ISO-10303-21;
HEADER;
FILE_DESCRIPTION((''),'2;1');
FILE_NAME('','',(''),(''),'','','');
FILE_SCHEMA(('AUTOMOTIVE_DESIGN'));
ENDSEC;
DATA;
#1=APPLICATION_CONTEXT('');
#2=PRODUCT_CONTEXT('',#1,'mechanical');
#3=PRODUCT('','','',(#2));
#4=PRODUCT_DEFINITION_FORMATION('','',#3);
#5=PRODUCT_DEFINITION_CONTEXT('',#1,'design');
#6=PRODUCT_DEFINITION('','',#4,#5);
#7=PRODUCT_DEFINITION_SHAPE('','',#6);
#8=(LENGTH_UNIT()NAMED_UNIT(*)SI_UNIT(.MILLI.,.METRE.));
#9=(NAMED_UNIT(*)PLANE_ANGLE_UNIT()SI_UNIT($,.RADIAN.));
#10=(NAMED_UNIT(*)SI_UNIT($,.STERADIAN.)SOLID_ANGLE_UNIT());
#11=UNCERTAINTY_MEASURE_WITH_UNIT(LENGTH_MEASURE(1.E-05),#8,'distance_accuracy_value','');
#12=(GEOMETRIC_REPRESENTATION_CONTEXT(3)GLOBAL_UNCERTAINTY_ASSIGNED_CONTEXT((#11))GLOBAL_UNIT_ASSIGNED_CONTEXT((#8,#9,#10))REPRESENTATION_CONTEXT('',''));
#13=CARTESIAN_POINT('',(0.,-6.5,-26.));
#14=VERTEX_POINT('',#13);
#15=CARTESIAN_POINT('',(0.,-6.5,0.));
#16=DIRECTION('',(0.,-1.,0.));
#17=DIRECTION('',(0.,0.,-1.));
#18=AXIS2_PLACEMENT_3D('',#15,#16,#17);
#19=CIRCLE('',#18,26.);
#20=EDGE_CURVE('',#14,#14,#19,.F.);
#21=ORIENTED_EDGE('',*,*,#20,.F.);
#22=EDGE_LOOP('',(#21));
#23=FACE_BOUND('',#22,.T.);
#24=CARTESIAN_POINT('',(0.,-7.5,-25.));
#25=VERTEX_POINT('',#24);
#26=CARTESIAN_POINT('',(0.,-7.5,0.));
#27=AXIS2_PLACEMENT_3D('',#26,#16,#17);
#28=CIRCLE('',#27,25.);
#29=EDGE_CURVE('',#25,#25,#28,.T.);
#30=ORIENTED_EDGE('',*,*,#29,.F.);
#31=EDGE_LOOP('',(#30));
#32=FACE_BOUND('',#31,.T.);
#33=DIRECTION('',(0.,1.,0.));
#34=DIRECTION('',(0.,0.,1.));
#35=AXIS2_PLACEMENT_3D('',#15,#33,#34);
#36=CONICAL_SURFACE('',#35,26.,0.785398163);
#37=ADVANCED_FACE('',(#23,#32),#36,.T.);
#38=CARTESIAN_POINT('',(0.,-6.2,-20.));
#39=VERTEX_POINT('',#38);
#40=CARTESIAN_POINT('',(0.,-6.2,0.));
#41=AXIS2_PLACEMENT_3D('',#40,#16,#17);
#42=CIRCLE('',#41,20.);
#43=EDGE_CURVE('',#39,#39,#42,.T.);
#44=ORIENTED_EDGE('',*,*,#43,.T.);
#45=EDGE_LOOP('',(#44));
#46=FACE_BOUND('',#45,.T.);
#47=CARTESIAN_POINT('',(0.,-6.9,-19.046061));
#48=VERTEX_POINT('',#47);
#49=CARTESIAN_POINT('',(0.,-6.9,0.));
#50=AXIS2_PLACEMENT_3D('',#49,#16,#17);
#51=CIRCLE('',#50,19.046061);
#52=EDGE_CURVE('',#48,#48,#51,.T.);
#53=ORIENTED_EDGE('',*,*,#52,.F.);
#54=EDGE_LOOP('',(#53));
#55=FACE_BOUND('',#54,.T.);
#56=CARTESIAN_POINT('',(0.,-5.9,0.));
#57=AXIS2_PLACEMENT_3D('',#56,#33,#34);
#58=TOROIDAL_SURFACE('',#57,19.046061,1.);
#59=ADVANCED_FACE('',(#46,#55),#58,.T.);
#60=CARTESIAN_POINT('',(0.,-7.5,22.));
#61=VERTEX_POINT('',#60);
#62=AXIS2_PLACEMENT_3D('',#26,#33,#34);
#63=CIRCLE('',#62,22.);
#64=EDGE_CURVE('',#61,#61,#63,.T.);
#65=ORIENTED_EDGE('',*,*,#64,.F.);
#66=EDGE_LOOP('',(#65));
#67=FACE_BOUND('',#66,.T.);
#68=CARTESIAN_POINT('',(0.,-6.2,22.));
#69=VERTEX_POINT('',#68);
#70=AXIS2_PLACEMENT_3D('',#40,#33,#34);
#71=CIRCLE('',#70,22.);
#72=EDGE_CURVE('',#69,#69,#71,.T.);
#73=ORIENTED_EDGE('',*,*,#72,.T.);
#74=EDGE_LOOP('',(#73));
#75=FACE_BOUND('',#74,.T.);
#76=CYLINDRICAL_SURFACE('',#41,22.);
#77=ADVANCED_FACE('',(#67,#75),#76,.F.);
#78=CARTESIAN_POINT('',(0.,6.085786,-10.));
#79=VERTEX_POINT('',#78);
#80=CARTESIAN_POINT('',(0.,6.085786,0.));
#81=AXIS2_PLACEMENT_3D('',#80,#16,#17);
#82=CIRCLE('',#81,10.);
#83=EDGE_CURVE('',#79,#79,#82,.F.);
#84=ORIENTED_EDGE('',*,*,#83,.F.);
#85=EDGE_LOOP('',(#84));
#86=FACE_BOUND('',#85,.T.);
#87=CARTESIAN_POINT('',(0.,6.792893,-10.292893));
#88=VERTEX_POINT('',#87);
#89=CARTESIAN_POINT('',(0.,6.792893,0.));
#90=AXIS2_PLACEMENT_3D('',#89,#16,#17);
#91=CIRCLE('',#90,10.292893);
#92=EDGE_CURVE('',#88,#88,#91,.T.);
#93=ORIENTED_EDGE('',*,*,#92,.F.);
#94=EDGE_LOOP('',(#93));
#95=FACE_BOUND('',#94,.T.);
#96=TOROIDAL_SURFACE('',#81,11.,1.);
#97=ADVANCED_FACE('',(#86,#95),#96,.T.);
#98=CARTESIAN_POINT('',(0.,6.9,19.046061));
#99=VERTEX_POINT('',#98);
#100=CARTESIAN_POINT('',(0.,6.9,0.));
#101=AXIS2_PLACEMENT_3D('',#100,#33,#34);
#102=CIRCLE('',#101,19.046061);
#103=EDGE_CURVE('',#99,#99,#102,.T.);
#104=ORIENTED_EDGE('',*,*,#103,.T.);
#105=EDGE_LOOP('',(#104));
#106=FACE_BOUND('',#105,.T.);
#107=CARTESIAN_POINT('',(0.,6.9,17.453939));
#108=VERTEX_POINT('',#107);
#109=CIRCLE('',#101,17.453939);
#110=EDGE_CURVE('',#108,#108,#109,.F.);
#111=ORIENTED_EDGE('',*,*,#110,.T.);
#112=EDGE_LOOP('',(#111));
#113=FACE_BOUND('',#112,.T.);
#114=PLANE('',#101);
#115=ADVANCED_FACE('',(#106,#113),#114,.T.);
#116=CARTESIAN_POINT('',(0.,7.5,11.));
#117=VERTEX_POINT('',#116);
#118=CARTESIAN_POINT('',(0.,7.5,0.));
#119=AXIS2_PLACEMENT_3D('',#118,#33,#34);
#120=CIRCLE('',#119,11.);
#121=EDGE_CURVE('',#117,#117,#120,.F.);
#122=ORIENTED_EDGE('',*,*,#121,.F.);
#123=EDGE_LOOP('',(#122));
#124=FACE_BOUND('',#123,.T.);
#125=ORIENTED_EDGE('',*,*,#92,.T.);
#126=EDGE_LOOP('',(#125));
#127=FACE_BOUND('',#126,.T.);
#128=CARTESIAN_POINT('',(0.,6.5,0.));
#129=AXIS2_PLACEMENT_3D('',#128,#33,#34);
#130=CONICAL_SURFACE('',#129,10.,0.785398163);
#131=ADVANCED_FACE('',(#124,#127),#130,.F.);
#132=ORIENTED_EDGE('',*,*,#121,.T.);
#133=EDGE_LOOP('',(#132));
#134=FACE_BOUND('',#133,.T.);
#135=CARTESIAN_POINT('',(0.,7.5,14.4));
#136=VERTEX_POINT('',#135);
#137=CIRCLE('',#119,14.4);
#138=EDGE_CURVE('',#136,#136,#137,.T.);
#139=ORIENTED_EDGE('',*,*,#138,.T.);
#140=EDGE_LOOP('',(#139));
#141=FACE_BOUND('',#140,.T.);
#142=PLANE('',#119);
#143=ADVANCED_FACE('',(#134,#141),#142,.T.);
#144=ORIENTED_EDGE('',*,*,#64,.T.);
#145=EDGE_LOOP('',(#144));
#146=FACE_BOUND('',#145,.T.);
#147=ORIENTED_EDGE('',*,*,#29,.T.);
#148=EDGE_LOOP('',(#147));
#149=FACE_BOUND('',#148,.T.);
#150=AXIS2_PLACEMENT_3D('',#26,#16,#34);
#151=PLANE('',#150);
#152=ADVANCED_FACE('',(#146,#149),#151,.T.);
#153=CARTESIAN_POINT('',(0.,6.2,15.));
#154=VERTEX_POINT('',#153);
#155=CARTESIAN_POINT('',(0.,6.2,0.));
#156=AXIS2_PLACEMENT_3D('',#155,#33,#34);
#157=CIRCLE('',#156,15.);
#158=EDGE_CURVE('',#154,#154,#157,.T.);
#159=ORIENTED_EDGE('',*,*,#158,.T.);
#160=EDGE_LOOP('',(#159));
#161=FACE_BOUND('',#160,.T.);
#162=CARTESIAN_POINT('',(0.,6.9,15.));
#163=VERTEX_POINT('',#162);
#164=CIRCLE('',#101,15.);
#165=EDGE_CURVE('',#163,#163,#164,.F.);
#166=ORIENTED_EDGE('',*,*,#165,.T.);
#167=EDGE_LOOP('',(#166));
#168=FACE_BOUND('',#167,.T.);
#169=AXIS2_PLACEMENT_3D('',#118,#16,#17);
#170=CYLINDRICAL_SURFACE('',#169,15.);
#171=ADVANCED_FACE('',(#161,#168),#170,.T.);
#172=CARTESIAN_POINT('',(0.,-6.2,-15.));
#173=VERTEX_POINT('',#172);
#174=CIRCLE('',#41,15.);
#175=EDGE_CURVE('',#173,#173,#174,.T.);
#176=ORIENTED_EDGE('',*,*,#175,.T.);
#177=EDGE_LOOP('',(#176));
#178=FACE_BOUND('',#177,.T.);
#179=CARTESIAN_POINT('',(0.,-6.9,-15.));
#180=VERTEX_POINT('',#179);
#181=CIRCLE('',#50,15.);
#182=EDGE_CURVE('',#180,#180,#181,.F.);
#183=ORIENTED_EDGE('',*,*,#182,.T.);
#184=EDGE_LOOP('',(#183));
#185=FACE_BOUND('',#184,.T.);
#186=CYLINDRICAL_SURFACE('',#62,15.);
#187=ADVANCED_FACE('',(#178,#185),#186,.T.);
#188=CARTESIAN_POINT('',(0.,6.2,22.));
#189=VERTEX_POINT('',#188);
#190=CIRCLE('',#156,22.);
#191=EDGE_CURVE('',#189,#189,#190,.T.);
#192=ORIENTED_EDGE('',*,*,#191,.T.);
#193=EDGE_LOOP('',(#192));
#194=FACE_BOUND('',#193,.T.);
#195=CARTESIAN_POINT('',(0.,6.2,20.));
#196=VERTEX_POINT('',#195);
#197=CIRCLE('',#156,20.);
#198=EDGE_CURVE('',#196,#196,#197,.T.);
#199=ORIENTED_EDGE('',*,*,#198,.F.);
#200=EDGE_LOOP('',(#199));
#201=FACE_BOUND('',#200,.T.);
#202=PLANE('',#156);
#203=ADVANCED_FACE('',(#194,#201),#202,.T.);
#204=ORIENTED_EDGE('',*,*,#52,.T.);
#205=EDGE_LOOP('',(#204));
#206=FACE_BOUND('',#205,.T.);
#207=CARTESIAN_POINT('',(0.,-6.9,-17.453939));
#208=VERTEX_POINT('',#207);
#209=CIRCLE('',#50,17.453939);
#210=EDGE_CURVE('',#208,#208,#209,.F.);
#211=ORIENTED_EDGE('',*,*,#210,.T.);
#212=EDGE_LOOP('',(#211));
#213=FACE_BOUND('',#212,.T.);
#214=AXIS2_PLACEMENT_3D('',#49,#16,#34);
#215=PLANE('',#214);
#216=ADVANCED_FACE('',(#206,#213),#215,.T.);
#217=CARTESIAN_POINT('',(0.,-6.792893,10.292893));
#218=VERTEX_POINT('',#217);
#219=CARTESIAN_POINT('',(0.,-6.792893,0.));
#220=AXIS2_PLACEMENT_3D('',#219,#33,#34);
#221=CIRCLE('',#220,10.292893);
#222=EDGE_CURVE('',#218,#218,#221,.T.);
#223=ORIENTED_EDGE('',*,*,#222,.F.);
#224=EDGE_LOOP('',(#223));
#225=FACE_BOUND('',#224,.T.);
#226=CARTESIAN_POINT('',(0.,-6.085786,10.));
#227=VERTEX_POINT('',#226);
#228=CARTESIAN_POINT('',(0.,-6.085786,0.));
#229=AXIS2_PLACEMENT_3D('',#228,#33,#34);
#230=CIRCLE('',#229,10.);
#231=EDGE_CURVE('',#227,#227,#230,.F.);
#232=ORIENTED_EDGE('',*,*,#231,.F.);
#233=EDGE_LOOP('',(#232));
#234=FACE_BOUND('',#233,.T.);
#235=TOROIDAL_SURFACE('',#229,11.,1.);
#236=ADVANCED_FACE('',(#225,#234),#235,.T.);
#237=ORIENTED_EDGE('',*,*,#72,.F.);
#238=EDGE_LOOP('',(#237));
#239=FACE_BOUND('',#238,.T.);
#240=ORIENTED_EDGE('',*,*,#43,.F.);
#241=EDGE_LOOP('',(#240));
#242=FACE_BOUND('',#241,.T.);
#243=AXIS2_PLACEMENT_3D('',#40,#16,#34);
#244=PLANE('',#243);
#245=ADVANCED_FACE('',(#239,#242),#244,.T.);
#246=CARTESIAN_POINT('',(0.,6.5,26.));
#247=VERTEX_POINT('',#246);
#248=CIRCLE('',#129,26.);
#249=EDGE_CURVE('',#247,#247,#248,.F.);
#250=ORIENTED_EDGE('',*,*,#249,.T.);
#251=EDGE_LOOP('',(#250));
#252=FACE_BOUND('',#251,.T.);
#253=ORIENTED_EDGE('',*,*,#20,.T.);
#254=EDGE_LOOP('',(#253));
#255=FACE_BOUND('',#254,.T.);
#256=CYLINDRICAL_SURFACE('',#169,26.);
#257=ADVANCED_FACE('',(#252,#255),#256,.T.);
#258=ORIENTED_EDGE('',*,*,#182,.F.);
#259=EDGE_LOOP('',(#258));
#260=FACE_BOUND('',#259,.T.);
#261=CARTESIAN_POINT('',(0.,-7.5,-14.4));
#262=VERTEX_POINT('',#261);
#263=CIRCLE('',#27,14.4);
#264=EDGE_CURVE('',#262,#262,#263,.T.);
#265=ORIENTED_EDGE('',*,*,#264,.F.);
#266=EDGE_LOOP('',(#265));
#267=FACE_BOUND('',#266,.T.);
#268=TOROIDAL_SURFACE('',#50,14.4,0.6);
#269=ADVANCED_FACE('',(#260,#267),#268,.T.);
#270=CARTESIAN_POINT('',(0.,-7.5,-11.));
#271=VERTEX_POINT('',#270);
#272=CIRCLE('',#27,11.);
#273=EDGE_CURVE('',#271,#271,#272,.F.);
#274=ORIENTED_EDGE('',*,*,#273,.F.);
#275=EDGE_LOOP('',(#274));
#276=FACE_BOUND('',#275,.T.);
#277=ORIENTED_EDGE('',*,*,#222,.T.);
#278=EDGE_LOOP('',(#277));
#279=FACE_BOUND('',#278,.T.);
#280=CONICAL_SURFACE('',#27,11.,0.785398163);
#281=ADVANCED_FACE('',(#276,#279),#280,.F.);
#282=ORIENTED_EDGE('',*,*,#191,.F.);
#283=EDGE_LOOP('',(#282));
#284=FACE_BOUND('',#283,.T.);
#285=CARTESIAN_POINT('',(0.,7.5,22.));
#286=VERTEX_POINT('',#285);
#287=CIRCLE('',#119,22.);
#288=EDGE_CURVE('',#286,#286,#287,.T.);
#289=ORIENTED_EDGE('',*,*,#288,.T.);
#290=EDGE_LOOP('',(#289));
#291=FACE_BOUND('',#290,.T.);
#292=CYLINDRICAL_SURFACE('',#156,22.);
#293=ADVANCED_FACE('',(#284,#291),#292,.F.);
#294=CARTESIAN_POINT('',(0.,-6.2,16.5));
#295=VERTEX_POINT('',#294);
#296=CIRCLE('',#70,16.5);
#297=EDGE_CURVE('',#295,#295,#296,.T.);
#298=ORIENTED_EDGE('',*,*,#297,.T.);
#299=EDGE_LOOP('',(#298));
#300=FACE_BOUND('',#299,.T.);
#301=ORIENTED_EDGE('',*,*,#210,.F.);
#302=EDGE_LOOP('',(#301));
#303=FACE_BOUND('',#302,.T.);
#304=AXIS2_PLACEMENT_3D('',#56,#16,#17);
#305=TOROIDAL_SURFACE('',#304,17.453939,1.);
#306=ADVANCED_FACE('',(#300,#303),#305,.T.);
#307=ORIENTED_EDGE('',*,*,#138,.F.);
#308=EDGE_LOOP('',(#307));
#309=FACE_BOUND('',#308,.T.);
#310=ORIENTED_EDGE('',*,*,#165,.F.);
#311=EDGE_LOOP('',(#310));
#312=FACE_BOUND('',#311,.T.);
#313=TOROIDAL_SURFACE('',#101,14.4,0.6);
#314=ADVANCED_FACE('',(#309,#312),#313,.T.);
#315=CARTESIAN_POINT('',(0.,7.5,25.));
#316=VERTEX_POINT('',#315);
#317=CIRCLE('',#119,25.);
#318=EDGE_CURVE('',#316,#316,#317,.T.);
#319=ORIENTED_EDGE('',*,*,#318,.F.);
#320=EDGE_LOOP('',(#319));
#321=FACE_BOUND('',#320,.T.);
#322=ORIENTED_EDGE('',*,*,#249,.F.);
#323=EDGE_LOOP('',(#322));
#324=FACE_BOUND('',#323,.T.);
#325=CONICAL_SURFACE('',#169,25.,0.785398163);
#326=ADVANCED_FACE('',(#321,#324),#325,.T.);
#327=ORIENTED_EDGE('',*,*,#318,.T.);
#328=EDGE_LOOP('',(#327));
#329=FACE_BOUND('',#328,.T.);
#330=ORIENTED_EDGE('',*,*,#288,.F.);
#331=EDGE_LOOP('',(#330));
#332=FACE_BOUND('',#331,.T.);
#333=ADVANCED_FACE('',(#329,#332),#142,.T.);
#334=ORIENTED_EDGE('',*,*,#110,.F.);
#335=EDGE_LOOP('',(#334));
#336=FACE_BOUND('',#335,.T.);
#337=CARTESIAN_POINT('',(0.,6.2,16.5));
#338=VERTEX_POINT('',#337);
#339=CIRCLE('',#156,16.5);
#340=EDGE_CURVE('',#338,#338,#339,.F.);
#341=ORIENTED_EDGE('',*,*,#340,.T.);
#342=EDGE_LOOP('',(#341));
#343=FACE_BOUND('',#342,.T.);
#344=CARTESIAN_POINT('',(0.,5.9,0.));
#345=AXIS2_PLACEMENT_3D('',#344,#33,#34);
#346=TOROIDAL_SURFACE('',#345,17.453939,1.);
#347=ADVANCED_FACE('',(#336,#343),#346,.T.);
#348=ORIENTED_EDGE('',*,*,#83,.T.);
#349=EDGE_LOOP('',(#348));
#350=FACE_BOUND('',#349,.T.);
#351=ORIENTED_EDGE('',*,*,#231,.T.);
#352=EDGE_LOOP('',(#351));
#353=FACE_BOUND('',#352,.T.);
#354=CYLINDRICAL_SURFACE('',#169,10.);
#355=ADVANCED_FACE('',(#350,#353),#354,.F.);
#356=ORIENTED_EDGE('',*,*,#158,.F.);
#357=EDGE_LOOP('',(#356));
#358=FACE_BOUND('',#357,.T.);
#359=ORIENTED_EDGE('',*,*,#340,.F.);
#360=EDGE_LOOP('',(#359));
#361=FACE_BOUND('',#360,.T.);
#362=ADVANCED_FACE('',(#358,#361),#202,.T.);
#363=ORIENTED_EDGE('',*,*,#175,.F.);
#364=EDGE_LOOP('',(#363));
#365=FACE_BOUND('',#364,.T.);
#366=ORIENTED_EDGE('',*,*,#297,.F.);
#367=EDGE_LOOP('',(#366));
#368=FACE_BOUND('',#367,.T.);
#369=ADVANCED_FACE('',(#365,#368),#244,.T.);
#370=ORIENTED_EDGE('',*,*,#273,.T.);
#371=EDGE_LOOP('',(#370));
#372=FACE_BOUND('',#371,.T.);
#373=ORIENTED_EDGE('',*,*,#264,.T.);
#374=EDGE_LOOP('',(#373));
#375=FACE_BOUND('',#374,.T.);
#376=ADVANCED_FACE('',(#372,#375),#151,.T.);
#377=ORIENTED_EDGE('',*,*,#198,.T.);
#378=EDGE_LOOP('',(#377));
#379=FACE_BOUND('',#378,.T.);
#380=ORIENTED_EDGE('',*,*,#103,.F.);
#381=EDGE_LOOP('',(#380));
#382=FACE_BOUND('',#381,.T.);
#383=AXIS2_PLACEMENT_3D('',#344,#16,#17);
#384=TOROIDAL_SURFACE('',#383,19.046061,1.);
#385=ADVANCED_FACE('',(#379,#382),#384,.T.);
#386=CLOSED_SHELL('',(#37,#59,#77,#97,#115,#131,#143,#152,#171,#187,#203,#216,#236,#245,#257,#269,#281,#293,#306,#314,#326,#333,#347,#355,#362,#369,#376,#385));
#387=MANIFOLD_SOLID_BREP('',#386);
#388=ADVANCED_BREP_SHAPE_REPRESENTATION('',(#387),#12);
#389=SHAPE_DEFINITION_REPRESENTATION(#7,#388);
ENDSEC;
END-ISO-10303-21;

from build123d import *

# Parameters (mm, degrees)
SKETCH1_R                = 26
BOSS_EXTRUDE1_DEPTH      = 7.5
SKETCH2_R                = 22
CUT_EXTRUDE1_DEPTH       = 1.3
SKETCH3_R                = 20
SKETCH3_R_2              = 16.5
BOSS_EXTRUDE2_DEPTH      = 0.7
SKETCH4_R                = 15
SKETCH4_R_2              = 10
BOSS_EXTRUDE3_DEPTH      = 1.3
SKETCH5_R                = 10
CUT_EXTRUDE2_DEPTH       = 38.288604157
CHAMFER1_SIZE            = 1
CHAMFER2_SIZE            = 1
FILLET1_R                = 1
FILLET2_R                = 1
FILLET3_R                = 0.6
CHAMFER1_OF_MIRROR2_SIZE = 1
CHAMFER2_OF_MIRROR2_SIZE = 1
FILLET1_OF_MIRROR2_R     = 1
FILLET2_OF_MIRROR2_R     = 1
FILLET3_OF_MIRROR2_R     = 0.6


with BuildPart() as part:
    # Sketch1 → Boss-Extrude1 (new body)
    with BuildSketch(Plane(origin=(0, 0, 0), x_dir=(1, 0, 0), z_dir=(0, 1, 0))):
        with Locations(Location((0, 0, 0), (0, 0, 270))):
            Circle(SKETCH1_R)
    boss_extrude1 = extrude(amount=BOSS_EXTRUDE1_DEPTH)

    # Sketch2 → Cut-Extrude1 (cut)
    with BuildSketch(Plane(origin=(0, 7.5, 0), x_dir=(1, 0, 0), z_dir=(0, 1, 0))):
        with Locations(Location((0, 0, 0), (0, 0, 270))):
            Circle(SKETCH2_R)
    cut_extrude1 = extrude(amount=-CUT_EXTRUDE1_DEPTH, mode=Mode.SUBTRACT)

    # Sketch3 → Boss-Extrude2 (add)
    with BuildSketch(Plane(origin=(0, 6.2, 0), x_dir=(1, 0, 0), z_dir=(0, 1, 0))):
        with Locations(Location((0, 0, 0), (0, 0, 270))):
            Circle(SKETCH3_R)
        with Locations(Location((0, 0, 0), (0, 0, 270))):
            Circle(SKETCH3_R_2, mode=Mode.SUBTRACT)
    boss_extrude2 = extrude(amount=BOSS_EXTRUDE2_DEPTH)

    # Sketch4 → Boss-Extrude3 (add)
    with BuildSketch(Plane(origin=(0, 6.2, 0), x_dir=(1, 0, 0), z_dir=(0, 1, 0))):
        with Locations(Location((0, 0, 0), (0, 0, 270))):
            Circle(SKETCH4_R)
        with Locations(Location((0, 0, 0), (0, 0, 270))):
            Circle(SKETCH4_R_2, mode=Mode.SUBTRACT)
    boss_extrude3 = extrude(amount=BOSS_EXTRUDE3_DEPTH)

    # Sketch5 → Cut-Extrude2 (cut, through all)
    with BuildSketch(Plane(origin=(0, 6.2, 0), x_dir=(1, 0, 0), z_dir=(0, 1, 0))):
        with Locations(Location((0, 0, 0), (0, 0, 270))):
            Circle(SKETCH5_R)
    cut_extrude2 = extrude(amount=-CUT_EXTRUDE2_DEPTH, mode=Mode.SUBTRACT)

    # Chamfer1
    chamfer1_edges = [part.edges().sort_by_distance(p)[0] for p in [
        (0, 7.5, -26),
    ]]
    chamfer(chamfer1_edges, length=CHAMFER1_SIZE)

    # Chamfer2
    chamfer2_edges = [part.edges().sort_by_distance(p)[0] for p in [
        (0, 7.5, -10),
    ]]
    chamfer(chamfer2_edges, length=CHAMFER2_SIZE)

    # Fillet1
    # the kernel refuses this fillet: 1 mm, written as the material it takes off along each edge
    with BuildSketch(Plane(origin=(0, 6.9, 0), x_dir=(0, 0, 1), z_dir=(-1, 0, 0))) as fillet1_piece_1:
        with BuildLine():
            CenterArc((19.046060799, -1), FILLET1_R, 17.457603124, 72.542396876)
            Line((20, -0.7), (20.019078784, -0.694))
            ThreePointArc((20.019078784, -0.694), (20.02, -0.35), (20.02, 0))
            Line((20.02, 0), (20, 0.02))
            Line((20, 0.02), (19.046060799, 0.02))
            Line((19.046060799, 0.02), (19.046060799, 0))
        make_face()
    revolve(axis=Axis((0, 6.9, 0), (0, 1, 0)), mode=Mode.SUBTRACT)
    with BuildSketch(Plane(origin=(0, 6.9, 0), x_dir=(0, 0, 1), z_dir=(-1, 0, 0))) as fillet1_piece_2:
        with BuildLine():
            CenterArc((17.453939201, -1), FILLET1_R, 90, 72.542396876)
            Line((17.453939201, 0), (17.453939201, 0.02))
            Line((17.453939201, 0.02), (16.5, 0.02))
            Line((16.5, 0.02), (16.48, 0))
            ThreePointArc((16.48, 0), (16.48, -0.35), (16.480921216, -0.694))
            Line((16.480921216, -0.694), (16.5, -0.7))
        make_face()
    revolve(axis=Axis((0, 6.9, 0), (0, 1, 0)), mode=Mode.SUBTRACT)

    # Fillet2
    fillet2_edges = [part.edges().sort_by_distance(p)[0] for p in [
        (0, 6.5, -10),
    ]]
    fillet(fillet2_edges, radius=FILLET2_R)

    # Fillet3
    fillet3_edges = [part.edges().sort_by_distance(p)[0] for p in [
        (0, 7.5, -15),
    ]]
    fillet(fillet3_edges, radius=FILLET3_R)

    # Mirror2: Boss-Extrude1, Cut-Extrude1, Boss-Extrude2, Boss-Extrude3, Cut-Extrude2 across Top Plane
    add(boss_extrude1.mirror(Plane(origin=(0, 0, 0), x_dir=(1, 0, 0), z_dir=(0, 1, 0))))
    add(cut_extrude1.mirror(Plane(origin=(0, 0, 0), x_dir=(1, 0, 0), z_dir=(0, 1, 0))), mode=Mode.SUBTRACT)
    add(boss_extrude2.mirror(Plane(origin=(0, 0, 0), x_dir=(1, 0, 0), z_dir=(0, 1, 0))))
    add(boss_extrude3.mirror(Plane(origin=(0, 0, 0), x_dir=(1, 0, 0), z_dir=(0, 1, 0))))
    add(cut_extrude2.mirror(Plane(origin=(0, 0, 0), x_dir=(1, 0, 0), z_dir=(0, 1, 0))), mode=Mode.SUBTRACT)

    # Chamfer1 of Mirror2
    chamfer1_of_mirror2_edges = [part.edges().sort_by_distance(p)[0] for p in [
        (0, -7.5, -26),
    ]]
    chamfer(chamfer1_of_mirror2_edges, length=CHAMFER1_OF_MIRROR2_SIZE)

    # Chamfer2 of Mirror2
    chamfer2_of_mirror2_edges = [part.edges().sort_by_distance(p)[0] for p in [
        (0, -7.5, -10),
    ]]
    chamfer(chamfer2_of_mirror2_edges, length=CHAMFER2_OF_MIRROR2_SIZE)

    # Fillet1 of Mirror2
    # the kernel refuses this fillet: 1 mm, written as the material it takes off along each edge
    with BuildSketch(Plane(origin=(0, -6.9, 0), x_dir=(0, 0, 1), z_dir=(-1, 0, 0))) as fillet1_of_mirror2_piece_1:
        with BuildLine():
            CenterArc((19.046060799, 1), FILLET1_OF_MIRROR2_R, 270, 72.542396876)
            Line((20, 0.7), (20.019078784, 0.694))
            ThreePointArc((20.019078784, 0.694), (20.02, 0.35), (20.02, 0))
            Line((20.02, 0), (20, -0.02))
            Line((20, -0.02), (19.046060799, -0.02))
            Line((19.046060799, -0.02), (19.046060799, 0))
        make_face()
    revolve(axis=Axis((0, -6.9, 0), (0, 1, 0)), mode=Mode.SUBTRACT)
    with BuildSketch(Plane(origin=(0, -6.9, 0), x_dir=(0, 0, 1), z_dir=(-1, 0, 0))) as fillet1_of_mirror2_piece_2:
        with BuildLine():
            CenterArc((17.453939201, 1), FILLET1_OF_MIRROR2_R, 197.457603124, 72.542396876)
            Line((17.453939201, 0), (17.453939201, -0.02))
            Line((17.453939201, -0.02), (16.5, -0.02))
            Line((16.5, -0.02), (16.48, 0))
            ThreePointArc((16.48, 0), (16.48, 0.35), (16.480921216, 0.694))
            Line((16.480921216, 0.694), (16.5, 0.7))
        make_face()
    revolve(axis=Axis((0, -6.9, 0), (0, 1, 0)), mode=Mode.SUBTRACT)

    # Fillet2 of Mirror2
    fillet2_of_mirror2_edges = [part.edges().sort_by_distance(p)[0] for p in [
        (0, -6.5, -10),
    ]]
    fillet(fillet2_of_mirror2_edges, radius=FILLET2_OF_MIRROR2_R)

    # Fillet3 of Mirror2
    fillet3_of_mirror2_edges = [part.edges().sort_by_distance(p)[0] for p in [
        (0, -7.5, -15),
    ]]
    fillet(fillet3_of_mirror2_edges, radius=FILLET3_OF_MIRROR2_R)


solid = part.part
